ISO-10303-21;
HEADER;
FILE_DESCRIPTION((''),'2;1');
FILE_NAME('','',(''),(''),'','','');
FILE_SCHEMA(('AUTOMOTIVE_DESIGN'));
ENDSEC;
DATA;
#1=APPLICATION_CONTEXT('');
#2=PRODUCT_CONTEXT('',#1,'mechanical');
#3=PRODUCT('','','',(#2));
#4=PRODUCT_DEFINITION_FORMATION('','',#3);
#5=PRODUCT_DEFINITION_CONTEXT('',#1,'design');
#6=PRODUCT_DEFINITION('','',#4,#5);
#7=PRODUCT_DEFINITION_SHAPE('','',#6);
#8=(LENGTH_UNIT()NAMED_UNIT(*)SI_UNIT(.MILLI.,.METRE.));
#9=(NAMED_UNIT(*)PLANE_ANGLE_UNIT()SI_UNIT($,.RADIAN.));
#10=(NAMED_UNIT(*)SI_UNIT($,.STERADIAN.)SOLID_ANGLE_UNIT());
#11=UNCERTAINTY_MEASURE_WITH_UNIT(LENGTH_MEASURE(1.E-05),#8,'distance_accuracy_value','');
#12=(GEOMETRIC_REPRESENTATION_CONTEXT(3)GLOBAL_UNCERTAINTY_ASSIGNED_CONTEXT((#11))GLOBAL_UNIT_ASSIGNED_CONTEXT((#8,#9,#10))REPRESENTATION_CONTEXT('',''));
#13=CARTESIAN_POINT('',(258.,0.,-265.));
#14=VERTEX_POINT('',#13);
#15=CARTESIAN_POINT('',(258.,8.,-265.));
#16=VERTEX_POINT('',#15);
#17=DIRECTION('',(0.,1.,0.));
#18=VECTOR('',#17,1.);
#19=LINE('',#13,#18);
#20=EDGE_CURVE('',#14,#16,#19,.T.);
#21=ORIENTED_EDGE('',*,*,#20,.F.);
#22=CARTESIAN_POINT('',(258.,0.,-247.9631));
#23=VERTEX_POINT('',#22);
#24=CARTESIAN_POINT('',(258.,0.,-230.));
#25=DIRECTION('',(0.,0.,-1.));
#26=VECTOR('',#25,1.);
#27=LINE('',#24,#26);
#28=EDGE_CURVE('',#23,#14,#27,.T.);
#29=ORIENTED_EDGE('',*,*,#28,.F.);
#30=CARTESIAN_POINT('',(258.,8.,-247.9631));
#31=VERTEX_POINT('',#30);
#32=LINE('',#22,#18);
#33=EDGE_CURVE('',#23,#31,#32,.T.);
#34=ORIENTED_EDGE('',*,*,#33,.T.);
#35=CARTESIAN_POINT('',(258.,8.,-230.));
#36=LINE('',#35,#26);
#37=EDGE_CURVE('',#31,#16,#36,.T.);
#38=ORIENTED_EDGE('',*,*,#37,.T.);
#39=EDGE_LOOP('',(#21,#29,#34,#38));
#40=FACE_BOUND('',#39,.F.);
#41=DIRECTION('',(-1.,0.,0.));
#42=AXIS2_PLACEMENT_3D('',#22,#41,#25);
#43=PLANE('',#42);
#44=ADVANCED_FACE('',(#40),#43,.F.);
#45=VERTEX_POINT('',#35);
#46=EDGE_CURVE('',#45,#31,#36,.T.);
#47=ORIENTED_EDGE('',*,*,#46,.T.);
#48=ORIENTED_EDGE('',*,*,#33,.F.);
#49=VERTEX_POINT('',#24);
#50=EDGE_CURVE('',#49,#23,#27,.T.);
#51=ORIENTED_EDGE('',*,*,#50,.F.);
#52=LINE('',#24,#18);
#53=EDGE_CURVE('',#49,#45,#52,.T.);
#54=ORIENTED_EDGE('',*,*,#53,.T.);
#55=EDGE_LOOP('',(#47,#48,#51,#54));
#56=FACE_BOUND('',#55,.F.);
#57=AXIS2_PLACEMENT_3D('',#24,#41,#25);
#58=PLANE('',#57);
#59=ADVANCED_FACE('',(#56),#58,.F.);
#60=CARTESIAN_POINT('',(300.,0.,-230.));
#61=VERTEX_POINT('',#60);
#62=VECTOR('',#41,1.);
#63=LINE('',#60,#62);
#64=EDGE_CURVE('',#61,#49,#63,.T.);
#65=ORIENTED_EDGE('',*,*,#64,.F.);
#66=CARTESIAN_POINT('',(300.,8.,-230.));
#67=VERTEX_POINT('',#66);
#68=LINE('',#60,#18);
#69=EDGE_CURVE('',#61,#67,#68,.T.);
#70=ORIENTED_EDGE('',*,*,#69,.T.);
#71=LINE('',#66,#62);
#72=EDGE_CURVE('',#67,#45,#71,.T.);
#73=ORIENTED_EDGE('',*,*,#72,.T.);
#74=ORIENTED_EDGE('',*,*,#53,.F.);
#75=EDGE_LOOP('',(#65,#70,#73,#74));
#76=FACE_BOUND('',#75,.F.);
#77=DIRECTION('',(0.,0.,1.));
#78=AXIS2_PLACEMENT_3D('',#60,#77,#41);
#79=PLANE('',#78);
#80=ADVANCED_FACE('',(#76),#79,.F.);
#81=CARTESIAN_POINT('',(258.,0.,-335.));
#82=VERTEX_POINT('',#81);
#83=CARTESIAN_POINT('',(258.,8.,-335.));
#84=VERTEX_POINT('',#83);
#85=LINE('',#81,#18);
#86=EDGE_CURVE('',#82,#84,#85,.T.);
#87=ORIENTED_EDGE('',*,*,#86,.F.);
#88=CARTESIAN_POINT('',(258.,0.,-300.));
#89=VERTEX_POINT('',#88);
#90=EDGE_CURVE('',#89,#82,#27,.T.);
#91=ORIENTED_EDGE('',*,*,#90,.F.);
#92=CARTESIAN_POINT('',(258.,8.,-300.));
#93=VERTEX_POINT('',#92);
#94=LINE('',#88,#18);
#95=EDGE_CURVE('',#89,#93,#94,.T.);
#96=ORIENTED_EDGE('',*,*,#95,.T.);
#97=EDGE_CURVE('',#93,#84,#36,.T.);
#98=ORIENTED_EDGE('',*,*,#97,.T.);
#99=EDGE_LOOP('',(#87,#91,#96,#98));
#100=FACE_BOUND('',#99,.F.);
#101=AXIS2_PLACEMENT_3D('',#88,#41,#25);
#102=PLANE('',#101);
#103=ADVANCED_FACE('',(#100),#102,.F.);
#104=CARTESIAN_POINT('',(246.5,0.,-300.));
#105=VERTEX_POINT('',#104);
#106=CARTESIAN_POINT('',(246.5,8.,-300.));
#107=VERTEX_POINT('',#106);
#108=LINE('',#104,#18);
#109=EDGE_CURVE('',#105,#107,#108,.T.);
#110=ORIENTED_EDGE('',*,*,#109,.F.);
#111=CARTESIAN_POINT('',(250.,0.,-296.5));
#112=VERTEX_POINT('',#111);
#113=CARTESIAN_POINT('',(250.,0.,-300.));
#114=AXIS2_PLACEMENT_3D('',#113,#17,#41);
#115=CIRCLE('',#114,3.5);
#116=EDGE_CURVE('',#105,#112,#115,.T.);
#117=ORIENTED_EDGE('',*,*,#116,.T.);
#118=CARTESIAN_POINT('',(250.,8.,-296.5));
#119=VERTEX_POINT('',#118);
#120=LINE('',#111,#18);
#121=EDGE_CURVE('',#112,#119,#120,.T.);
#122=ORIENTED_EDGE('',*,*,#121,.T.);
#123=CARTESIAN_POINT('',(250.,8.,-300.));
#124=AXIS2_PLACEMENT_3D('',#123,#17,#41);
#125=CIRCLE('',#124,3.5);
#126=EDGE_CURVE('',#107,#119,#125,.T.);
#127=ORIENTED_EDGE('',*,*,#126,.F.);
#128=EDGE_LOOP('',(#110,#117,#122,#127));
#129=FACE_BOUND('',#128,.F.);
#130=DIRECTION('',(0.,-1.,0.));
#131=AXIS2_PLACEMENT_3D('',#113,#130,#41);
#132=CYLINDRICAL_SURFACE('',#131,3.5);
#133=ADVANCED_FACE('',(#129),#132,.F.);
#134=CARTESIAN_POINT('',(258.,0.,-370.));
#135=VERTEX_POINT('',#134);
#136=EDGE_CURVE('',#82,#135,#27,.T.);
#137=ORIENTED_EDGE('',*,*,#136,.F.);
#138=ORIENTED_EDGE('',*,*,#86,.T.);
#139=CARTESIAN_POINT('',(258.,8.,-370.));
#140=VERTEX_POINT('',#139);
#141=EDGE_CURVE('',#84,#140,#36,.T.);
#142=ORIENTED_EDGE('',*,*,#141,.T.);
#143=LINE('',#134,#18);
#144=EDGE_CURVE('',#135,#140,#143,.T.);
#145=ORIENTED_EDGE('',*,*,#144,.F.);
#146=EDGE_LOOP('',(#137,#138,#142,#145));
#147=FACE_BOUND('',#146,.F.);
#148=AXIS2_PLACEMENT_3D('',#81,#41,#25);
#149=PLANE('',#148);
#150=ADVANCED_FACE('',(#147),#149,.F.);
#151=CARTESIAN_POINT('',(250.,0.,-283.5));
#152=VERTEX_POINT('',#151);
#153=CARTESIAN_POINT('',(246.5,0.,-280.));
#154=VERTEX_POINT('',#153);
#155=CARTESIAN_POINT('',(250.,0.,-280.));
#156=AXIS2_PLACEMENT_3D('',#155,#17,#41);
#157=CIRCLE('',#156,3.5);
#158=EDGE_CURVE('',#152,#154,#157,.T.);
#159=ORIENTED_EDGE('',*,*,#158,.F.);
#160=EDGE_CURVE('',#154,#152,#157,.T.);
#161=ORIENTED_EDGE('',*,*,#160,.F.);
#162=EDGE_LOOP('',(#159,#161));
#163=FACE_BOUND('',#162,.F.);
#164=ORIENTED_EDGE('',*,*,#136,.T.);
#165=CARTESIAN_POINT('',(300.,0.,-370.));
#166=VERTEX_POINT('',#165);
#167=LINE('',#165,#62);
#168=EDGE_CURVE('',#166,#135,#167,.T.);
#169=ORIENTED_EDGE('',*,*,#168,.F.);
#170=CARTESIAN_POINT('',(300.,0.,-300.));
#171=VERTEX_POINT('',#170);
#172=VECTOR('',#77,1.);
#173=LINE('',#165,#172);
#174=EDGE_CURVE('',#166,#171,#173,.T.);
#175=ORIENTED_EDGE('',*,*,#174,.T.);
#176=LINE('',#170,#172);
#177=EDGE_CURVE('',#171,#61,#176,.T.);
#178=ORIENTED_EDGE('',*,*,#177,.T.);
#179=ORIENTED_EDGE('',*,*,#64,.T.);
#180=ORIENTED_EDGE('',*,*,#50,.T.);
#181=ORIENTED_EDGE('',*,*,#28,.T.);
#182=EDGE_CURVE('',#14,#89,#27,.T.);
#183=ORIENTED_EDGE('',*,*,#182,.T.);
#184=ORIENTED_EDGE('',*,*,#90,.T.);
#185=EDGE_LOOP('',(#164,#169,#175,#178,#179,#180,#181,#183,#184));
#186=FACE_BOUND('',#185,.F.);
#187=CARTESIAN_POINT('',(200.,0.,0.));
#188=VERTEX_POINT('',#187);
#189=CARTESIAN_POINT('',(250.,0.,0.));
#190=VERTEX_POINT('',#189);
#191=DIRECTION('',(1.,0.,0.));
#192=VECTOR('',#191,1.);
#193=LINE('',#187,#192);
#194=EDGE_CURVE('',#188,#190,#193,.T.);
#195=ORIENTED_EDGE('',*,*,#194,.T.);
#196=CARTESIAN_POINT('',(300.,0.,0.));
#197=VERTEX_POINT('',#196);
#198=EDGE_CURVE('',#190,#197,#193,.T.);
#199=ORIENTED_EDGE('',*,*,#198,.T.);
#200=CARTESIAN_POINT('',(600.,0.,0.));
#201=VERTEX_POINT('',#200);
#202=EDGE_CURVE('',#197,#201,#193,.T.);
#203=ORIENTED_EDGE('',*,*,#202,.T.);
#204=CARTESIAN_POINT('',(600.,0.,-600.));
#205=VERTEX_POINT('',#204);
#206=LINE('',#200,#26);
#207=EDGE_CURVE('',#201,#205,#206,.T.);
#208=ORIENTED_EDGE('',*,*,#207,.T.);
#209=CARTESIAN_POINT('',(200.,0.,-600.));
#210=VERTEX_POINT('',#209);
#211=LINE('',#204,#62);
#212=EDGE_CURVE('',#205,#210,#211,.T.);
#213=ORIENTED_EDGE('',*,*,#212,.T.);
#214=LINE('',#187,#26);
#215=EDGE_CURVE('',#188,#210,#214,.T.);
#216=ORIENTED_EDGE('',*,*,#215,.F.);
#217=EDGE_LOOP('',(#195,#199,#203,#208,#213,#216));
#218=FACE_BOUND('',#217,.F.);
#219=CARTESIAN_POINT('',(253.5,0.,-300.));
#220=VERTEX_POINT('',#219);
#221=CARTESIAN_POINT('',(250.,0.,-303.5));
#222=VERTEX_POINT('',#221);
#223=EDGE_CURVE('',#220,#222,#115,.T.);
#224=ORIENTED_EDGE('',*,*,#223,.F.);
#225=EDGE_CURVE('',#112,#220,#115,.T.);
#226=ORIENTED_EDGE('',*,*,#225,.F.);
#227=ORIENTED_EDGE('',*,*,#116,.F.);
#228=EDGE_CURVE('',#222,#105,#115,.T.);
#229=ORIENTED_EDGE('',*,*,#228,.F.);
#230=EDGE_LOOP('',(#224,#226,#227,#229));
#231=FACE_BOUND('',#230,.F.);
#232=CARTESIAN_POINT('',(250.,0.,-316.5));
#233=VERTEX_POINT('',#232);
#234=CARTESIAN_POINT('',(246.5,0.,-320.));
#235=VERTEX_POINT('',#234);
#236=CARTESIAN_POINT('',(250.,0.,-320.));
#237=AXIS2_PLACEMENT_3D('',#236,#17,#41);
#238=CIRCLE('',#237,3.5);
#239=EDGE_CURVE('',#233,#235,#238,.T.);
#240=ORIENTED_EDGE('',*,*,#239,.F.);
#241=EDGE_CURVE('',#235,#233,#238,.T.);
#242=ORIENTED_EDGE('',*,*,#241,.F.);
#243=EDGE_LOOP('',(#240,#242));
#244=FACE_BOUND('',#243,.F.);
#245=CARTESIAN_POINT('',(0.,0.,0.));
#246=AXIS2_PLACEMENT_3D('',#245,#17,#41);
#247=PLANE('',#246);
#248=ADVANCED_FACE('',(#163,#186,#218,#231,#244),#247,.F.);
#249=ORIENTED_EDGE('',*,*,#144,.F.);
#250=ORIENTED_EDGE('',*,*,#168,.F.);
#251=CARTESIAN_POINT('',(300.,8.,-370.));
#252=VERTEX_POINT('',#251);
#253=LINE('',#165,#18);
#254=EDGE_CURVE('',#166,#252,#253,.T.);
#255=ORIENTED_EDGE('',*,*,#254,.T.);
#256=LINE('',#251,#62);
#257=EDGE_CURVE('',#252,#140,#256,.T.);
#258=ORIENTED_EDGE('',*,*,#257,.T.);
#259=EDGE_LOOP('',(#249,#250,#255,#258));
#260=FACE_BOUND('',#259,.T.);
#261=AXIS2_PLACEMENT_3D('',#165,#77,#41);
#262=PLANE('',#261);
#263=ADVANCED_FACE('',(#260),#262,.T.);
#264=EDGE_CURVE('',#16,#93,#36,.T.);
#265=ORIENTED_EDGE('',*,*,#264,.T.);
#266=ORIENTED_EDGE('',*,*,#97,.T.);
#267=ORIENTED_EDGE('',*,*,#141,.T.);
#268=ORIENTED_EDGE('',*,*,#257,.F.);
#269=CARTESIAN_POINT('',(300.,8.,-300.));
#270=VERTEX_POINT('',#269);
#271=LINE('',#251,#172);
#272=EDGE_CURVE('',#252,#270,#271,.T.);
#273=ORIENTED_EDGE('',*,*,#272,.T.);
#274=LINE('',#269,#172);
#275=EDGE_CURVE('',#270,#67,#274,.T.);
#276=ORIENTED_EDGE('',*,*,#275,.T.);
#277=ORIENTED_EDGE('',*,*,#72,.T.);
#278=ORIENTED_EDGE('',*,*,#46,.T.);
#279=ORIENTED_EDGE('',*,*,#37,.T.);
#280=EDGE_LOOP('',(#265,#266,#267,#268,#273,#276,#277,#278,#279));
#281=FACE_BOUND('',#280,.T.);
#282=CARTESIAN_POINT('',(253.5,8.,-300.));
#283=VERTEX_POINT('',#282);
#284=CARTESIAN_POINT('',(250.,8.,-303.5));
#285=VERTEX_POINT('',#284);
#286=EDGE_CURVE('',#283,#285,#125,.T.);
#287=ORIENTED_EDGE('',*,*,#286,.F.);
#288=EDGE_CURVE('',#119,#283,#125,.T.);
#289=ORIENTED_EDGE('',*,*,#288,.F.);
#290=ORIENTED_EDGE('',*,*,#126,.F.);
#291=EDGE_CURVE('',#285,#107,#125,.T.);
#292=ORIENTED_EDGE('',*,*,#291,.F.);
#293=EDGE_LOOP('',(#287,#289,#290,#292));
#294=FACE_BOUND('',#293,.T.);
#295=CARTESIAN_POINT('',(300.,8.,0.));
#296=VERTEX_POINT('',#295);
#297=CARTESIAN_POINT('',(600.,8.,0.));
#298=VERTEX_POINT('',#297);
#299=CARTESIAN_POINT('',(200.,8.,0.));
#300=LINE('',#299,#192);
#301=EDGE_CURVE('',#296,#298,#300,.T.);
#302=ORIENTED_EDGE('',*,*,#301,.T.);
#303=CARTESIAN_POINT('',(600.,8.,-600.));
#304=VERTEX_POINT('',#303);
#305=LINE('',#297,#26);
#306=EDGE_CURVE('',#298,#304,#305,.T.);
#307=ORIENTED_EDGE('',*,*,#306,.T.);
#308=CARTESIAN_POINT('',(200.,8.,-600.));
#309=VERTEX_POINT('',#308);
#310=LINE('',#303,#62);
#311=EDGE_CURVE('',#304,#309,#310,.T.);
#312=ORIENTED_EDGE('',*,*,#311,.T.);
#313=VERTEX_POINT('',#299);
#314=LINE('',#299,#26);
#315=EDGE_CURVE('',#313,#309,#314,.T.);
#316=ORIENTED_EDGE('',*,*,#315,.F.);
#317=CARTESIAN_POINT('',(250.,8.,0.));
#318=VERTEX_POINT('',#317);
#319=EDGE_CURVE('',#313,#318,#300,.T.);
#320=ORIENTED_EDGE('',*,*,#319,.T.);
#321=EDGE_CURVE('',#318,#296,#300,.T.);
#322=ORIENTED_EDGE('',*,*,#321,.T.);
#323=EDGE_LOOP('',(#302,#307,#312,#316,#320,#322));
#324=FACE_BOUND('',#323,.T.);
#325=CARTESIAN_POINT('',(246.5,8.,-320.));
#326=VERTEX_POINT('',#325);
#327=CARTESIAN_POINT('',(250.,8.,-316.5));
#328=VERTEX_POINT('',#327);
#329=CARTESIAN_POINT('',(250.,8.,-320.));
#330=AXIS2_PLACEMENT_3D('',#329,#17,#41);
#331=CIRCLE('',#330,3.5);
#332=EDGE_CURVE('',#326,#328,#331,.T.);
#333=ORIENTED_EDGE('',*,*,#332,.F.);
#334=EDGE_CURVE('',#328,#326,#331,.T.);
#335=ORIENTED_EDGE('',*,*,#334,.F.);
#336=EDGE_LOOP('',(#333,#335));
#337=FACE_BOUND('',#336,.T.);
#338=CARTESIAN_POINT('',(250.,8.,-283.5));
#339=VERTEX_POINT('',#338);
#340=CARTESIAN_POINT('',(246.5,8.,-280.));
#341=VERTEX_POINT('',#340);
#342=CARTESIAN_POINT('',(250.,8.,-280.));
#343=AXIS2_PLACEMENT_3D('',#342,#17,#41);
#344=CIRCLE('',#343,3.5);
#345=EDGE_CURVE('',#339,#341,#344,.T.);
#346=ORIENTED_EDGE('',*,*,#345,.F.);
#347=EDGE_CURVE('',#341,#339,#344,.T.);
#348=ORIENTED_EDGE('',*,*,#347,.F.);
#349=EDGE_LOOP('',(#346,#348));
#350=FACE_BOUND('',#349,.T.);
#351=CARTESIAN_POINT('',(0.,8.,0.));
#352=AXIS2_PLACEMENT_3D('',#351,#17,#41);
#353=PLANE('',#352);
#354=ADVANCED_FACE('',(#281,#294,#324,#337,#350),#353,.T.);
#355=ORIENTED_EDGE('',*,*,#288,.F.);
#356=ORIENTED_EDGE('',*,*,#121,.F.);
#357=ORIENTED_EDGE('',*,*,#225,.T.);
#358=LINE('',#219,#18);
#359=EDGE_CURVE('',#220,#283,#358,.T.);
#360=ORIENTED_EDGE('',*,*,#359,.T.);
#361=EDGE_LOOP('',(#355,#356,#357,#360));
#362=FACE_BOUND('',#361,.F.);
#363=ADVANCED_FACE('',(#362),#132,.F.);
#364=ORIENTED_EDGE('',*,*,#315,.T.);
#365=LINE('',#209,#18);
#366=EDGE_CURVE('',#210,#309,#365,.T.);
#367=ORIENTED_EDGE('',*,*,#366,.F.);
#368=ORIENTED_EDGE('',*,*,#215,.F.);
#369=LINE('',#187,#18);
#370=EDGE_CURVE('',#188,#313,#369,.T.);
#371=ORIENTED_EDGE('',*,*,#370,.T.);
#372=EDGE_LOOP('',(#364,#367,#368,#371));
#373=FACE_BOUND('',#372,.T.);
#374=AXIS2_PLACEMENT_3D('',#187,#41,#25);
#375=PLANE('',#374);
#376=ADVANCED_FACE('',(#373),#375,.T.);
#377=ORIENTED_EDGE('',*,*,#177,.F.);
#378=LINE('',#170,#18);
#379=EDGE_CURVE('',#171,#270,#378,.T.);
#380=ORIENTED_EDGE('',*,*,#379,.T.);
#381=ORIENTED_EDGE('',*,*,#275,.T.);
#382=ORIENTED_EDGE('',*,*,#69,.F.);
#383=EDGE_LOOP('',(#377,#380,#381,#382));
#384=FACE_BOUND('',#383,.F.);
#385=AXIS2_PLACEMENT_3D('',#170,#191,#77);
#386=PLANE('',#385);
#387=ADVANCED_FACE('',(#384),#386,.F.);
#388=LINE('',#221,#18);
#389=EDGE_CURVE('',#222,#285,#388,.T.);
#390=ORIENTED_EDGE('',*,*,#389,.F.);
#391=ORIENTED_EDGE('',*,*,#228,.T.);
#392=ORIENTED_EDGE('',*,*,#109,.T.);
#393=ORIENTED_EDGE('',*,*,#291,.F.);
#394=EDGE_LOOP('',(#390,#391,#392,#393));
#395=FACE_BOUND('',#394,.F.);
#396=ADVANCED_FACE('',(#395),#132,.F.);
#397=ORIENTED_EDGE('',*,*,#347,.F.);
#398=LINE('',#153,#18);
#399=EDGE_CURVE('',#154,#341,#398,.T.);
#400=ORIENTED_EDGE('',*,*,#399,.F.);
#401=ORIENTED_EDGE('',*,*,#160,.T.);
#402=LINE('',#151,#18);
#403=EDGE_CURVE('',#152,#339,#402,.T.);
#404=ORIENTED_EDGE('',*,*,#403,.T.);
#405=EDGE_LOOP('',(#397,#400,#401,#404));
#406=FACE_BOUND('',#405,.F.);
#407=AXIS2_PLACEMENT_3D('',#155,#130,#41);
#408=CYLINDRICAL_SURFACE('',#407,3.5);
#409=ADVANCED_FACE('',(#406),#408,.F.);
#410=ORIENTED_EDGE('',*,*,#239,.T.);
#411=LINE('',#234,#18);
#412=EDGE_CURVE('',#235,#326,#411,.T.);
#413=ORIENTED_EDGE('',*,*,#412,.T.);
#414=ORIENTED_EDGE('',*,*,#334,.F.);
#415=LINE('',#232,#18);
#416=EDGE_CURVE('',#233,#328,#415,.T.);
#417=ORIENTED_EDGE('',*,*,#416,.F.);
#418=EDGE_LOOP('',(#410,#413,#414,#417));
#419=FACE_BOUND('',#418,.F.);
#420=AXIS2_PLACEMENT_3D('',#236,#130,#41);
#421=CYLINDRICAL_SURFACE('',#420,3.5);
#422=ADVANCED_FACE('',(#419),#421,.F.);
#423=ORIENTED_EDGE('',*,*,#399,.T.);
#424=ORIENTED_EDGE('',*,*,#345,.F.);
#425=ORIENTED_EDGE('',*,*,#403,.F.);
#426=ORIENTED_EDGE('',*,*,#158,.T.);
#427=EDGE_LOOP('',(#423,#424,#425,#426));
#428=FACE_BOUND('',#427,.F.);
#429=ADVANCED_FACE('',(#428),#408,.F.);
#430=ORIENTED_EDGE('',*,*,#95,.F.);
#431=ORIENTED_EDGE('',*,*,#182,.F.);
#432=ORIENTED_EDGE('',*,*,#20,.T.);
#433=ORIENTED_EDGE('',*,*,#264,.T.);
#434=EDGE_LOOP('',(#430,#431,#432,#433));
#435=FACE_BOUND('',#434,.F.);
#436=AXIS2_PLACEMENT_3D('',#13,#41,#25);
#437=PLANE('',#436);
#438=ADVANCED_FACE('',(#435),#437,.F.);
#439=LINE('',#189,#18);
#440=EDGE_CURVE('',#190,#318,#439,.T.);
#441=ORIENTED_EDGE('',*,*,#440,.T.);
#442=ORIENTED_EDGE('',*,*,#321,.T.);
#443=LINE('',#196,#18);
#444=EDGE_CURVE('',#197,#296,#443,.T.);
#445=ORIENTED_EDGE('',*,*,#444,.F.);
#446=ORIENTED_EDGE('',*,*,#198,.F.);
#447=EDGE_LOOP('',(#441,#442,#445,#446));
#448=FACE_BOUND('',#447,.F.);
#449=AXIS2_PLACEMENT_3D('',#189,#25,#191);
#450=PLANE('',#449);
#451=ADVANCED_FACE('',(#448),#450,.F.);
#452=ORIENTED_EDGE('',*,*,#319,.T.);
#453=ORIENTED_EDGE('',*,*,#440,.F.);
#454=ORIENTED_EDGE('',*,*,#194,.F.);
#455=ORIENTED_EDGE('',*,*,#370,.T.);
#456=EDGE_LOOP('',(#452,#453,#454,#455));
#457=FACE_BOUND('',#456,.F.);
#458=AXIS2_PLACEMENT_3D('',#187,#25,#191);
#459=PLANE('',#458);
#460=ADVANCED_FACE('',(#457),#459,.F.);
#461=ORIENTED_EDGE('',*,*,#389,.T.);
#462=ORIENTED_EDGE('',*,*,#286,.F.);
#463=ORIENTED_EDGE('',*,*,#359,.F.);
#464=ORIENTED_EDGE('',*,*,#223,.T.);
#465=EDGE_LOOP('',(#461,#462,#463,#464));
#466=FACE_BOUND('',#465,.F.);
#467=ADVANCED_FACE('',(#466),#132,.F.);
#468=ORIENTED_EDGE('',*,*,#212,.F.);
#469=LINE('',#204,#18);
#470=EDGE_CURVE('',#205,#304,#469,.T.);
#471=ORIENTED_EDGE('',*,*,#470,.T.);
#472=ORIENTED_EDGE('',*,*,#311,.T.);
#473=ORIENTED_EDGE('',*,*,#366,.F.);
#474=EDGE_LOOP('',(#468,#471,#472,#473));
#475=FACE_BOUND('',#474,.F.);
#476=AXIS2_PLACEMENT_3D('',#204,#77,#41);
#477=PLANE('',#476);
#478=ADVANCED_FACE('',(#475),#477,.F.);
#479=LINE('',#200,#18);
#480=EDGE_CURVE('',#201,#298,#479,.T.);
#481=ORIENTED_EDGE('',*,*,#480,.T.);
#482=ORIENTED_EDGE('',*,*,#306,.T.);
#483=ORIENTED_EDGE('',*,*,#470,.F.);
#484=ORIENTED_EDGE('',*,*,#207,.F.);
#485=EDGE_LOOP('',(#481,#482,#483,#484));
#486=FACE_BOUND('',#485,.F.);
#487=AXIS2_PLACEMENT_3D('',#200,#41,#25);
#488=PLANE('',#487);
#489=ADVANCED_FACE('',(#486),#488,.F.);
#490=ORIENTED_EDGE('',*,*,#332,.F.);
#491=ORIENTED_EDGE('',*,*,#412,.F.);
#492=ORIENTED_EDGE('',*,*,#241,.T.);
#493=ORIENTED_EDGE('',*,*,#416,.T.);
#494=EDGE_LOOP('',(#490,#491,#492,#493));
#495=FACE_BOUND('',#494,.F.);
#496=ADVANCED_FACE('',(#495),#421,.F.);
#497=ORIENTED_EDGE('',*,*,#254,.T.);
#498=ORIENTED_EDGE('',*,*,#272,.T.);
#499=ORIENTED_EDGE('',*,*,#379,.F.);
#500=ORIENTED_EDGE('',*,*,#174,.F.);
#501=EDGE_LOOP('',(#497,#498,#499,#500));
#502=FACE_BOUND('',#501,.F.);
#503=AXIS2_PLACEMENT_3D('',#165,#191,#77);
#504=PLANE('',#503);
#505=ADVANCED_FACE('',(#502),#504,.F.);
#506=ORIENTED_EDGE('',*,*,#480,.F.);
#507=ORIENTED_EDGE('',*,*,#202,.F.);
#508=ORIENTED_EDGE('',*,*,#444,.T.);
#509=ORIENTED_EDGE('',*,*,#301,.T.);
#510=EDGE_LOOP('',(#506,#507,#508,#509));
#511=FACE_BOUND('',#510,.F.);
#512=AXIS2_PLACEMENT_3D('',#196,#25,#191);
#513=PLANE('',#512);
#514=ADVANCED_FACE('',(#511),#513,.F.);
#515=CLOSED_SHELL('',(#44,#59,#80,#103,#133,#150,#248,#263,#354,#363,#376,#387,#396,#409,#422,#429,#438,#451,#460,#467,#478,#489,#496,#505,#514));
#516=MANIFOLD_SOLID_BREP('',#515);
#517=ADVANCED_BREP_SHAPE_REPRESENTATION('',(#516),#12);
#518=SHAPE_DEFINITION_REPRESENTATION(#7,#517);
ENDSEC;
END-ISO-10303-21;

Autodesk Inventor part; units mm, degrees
ref_plane "YZ Plane" through (0, 0, 0) normal (1, 0, 0) x (0, 1, 0)
ref_plane "XZ Plane" through (0, 0, 0) normal (0, 1, 0) x (-1, 0, 0)
ref_plane "XY Plane" through (0, 0, 0) normal (0, 0, 1) x (1, 0, 0)
sketch "Эскиз1" plane through (0, 0, 0) normal (0, 1, 0) x (-1, 0, 0)
  line L0 (-200, 0) -> (-600, 0)
  line L1 (-600, 0) -> (-600, -600)
  line L2 (-600, -600) -> (-200, -600)
  line L3 (-200, 0) -> (-250, 0)
  line L4 (-250, 0) -> (-200, 0)
  line L5 (-258, -230) -> (-258, -370)
  line L6 (-300, -230) -> (-258, -230)
  line L7 (-300, -370) -> (-258, -370)
  line L8 (-258, -335) -> (-258, -265)
  line L9 (-300, 0) -> (-200, 0)
  line L10 (-258, -300) -> (-258, -247.9631)
  line L11 (-258, -300) -> (-250, -300)
  line L12 (-250, -300) -> (-250, -280)
  line L13 (-250, -280) -> (-250, -300)
  line L14 (-250, -300) -> (-250, -320)
  circle A0 centre (-250, -320) radius 3.5
  circle A1 centre (-250, -300) radius 3.5
  circle A2 centre (-250, -280) radius 3.5
  line L15 (-300, -300) -> (-300, -230)
  line L16 (-600, 0) -> (-250, 0)
  line L17 (-600, 0) -> (-200, 0)
  line L18 (-200, 0) -> (-200, -600)
  line L19 (-300, -370) -> (-300, -300)
  point P0 (0, 0)
  point P1 (-200, -600)
  point P2 (-200, 0)
  dimension "d1" = 600
  dimension "d16" = 140
  dimension "d17" = 42
  dimension "d23" = 8
  dimension "d24" = 20
  dimension "d26" = 20
  dimension "d27" = 7
  dimension "d28" = 7
  dimension "d29" = 7
  dimension "d30" = 70
  dimension "d31" = 300
  dimension "d33" = 400
extrude "Выдавливание2" add sketch "Эскиз1" along normal blind 8
properties part number "Нижняя полка"
